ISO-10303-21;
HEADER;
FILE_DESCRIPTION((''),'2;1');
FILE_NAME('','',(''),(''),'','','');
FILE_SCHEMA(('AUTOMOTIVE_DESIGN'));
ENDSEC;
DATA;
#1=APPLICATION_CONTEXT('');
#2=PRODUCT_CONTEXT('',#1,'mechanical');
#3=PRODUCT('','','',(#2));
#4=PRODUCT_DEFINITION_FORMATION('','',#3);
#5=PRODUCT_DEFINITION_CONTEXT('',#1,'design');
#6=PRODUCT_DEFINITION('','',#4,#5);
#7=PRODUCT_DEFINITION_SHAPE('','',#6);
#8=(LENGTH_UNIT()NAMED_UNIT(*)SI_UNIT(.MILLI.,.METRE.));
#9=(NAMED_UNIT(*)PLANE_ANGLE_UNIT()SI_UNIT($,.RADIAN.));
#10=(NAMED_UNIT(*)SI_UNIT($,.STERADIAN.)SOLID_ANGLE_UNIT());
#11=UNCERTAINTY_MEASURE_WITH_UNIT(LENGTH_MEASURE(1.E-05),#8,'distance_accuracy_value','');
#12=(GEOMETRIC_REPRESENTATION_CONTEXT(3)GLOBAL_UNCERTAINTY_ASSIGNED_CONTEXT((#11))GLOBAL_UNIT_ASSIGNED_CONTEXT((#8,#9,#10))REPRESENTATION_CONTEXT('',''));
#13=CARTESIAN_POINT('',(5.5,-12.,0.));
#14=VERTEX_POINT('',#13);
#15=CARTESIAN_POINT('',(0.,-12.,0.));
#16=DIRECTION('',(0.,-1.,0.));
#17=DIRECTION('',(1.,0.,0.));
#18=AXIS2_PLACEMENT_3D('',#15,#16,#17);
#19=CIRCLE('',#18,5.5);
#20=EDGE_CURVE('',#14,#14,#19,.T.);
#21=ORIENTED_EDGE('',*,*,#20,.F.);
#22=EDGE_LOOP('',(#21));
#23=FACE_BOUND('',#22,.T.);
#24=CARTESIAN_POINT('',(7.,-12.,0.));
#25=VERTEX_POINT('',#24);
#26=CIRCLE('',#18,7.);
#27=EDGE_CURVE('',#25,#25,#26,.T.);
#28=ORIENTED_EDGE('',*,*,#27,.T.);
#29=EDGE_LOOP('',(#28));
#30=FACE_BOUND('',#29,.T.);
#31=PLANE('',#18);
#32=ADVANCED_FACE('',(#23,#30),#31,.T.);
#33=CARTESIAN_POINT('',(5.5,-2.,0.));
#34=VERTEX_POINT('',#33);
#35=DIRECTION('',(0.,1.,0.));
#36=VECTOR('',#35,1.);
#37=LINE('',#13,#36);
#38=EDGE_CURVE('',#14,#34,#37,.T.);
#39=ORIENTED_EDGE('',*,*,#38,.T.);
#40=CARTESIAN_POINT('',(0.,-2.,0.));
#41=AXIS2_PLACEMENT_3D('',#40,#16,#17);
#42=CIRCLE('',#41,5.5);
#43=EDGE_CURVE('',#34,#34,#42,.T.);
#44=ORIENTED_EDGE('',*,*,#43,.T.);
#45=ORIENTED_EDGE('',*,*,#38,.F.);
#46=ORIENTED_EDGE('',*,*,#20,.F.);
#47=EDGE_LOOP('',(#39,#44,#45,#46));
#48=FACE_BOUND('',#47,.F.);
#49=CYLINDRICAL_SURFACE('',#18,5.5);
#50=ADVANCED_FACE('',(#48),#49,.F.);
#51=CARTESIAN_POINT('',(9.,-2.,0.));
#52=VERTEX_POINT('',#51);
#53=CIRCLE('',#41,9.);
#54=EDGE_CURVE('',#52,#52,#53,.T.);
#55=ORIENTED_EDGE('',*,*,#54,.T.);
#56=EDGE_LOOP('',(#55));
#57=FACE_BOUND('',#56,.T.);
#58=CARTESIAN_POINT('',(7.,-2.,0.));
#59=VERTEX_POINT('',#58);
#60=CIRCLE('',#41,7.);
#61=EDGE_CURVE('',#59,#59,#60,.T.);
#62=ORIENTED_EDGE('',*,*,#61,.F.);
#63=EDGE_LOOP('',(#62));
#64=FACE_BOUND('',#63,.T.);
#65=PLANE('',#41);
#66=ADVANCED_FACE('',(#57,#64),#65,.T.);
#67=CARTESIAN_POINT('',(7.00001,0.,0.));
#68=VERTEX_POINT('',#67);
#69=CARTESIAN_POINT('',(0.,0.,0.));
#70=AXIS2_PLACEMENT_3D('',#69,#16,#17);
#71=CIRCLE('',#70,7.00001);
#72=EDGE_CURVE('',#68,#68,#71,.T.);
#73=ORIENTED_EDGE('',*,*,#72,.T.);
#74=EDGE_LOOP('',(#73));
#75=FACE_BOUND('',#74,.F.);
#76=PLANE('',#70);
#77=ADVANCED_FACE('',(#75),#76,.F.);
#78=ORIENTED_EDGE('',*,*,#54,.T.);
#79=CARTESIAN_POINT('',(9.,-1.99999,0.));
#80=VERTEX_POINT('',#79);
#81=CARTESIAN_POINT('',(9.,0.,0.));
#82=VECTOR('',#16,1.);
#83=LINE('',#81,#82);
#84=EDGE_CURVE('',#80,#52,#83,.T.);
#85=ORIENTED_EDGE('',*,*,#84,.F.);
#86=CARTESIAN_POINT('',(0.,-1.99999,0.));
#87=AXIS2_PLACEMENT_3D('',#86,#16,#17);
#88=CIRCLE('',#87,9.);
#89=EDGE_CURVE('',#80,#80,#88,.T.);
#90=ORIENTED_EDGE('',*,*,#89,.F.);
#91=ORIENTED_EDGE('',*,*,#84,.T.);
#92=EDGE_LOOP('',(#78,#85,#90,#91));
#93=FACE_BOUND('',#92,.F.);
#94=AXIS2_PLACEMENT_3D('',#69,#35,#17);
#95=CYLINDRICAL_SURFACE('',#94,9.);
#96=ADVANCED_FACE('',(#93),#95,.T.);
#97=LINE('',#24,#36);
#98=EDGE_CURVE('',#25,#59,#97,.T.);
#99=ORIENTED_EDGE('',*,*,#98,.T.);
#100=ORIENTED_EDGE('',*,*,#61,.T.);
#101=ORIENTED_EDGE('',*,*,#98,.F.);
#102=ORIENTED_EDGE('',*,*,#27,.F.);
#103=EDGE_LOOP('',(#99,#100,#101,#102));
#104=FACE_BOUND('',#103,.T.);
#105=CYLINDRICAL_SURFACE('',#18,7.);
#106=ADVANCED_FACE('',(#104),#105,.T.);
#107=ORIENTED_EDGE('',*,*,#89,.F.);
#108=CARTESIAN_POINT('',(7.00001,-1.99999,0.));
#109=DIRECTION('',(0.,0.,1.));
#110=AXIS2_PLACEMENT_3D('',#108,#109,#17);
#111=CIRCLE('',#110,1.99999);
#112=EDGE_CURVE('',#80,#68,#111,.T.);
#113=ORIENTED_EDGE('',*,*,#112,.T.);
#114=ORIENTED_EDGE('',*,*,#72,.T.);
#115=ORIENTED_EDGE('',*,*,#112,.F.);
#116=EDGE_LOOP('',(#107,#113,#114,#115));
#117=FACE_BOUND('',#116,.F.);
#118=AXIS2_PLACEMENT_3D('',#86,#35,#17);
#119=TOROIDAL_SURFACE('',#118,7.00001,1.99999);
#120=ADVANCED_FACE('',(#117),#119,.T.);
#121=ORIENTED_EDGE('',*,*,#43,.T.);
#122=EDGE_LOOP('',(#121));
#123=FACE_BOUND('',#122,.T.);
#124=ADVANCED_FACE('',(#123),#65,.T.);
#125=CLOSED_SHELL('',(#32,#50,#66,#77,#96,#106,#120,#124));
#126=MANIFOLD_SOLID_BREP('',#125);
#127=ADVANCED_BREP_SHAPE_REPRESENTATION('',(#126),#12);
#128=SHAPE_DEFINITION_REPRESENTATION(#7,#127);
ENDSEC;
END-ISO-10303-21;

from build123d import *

# Parameters (mm, degrees)
F0_R     = 9
F1_DEPTH = 12
F2_R     = 9
F2_R_2   = 7
F3_DEPTH = 10
F4_R     = 5.5
F5_DEPTH = 10
F6_R     = 1.99999


# Not quite as in the source:
# - a fillet or chamfer is up to 0.001 mm smaller than in the source, because OpenCascade refuses the exact size


with BuildPart() as f1:
    # F0 (on Front) → F1 (new body)
    with BuildSketch(Plane.XZ):
        Circle(F0_R)
    extrude(amount=F1_DEPTH)

    # F2 (on face) → F3 (cut)
    with BuildSketch(Plane.XZ.offset(12)):
        Circle(F2_R)
        Circle(F2_R_2, mode=Mode.SUBTRACT)
    extrude(amount=-F3_DEPTH, mode=Mode.SUBTRACT)

    # F4 (on face) → F5 (cut)
    with BuildSketch(Plane.XZ.offset(12)):
        Circle(F4_R)
    extrude(amount=-F5_DEPTH, mode=Mode.SUBTRACT)

    # F6 (radius 2 in the source; OpenCascade refuses exactly that, so slightly less here)
    f6_edges = [f1.edges().sort_by_distance(p)[0] for p in [
        (-9, 0, 0),
    ]]
    fillet(f6_edges, radius=F6_R)


solid = f1.part
